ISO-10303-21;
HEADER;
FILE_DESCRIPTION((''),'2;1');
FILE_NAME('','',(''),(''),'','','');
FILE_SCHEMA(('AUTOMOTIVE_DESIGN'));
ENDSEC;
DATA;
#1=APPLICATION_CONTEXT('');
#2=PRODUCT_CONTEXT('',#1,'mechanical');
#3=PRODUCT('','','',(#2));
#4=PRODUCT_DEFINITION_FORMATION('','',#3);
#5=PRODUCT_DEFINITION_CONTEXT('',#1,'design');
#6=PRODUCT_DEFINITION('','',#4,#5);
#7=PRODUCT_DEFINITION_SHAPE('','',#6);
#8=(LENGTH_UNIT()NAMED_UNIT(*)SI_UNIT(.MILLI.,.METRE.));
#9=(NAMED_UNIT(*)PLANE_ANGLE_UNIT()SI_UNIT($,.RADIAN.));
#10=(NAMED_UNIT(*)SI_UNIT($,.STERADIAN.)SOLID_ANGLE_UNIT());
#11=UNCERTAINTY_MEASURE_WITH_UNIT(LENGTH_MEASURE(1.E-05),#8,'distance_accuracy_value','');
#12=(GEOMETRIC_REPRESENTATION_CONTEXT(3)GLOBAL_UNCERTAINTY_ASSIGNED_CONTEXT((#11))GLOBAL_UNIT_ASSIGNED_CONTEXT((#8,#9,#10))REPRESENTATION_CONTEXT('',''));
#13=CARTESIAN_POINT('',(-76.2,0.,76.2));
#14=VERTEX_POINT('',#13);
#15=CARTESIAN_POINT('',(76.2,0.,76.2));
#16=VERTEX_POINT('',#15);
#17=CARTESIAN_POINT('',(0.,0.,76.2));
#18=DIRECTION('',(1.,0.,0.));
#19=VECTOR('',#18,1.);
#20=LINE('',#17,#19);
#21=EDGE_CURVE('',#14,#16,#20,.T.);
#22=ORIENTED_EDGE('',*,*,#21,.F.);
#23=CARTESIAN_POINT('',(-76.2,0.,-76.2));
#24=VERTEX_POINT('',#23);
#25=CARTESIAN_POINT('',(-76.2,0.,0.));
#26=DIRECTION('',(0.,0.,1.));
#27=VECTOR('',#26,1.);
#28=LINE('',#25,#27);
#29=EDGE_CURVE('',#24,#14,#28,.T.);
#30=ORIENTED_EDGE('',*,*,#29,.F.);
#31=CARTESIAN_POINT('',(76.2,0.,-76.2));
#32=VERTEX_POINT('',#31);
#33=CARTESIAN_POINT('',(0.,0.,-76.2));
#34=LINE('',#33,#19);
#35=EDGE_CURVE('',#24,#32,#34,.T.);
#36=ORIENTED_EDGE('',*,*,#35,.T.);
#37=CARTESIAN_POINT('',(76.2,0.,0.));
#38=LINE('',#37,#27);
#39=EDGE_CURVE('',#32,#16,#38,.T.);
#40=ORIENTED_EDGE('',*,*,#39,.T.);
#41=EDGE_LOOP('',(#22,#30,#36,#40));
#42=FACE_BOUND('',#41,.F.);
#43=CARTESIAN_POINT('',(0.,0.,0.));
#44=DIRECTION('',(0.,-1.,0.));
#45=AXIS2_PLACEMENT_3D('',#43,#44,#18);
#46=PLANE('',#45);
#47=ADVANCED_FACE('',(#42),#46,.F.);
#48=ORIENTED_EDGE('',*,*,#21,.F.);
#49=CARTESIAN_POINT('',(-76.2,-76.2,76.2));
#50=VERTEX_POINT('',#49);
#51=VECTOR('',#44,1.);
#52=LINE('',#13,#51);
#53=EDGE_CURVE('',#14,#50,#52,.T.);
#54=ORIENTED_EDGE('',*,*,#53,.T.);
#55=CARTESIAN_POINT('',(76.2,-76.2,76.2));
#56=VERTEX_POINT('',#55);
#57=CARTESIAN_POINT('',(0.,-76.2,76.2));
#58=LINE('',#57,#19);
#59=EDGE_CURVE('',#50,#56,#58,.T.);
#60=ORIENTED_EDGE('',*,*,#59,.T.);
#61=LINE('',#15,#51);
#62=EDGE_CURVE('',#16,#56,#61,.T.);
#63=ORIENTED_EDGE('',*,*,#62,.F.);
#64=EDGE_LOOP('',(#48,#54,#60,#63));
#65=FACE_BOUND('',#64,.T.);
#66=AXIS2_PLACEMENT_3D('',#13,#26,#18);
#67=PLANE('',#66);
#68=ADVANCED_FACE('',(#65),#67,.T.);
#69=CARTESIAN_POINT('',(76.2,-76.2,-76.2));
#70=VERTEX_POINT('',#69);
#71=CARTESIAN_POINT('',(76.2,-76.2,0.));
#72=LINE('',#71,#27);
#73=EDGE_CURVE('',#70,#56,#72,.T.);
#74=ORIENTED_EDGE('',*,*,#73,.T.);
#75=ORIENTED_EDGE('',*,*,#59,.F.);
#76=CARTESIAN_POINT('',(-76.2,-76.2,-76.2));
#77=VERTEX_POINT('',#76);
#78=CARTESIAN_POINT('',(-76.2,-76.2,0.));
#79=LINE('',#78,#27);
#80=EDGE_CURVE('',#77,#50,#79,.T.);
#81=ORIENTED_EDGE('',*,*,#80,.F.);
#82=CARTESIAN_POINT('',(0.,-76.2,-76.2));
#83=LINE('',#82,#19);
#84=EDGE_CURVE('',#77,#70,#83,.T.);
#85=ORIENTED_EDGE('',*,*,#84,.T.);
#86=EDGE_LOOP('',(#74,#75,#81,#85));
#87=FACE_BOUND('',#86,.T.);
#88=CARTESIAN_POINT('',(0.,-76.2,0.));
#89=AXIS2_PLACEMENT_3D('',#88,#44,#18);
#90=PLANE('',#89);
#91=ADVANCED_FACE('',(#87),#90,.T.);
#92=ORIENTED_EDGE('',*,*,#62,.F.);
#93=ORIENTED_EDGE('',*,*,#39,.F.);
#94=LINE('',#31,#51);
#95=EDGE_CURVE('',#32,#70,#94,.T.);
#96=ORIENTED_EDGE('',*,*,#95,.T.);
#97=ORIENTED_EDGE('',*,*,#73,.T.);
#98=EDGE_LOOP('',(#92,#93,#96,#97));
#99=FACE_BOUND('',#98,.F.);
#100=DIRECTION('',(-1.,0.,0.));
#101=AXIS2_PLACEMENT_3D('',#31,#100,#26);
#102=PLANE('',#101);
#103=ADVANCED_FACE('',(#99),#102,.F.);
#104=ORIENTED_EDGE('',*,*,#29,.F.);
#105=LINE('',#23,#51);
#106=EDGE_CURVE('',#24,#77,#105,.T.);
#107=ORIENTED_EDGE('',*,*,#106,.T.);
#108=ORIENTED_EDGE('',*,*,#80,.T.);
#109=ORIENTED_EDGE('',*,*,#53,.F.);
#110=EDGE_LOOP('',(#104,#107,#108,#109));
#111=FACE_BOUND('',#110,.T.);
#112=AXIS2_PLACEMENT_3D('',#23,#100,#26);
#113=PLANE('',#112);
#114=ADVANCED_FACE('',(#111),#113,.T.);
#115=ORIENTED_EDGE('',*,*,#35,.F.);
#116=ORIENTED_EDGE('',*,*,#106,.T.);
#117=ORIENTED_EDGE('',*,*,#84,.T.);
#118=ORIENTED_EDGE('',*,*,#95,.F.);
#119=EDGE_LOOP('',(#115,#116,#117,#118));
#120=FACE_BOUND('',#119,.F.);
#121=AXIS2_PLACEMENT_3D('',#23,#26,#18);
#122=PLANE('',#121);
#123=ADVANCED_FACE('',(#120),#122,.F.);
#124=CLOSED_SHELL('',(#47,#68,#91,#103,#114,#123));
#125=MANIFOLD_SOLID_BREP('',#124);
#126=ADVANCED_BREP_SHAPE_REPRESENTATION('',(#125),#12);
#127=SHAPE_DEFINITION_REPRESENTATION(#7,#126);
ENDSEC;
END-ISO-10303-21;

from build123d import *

# Parameters (mm, degrees)
F1_W     = 152.4
F1_H     = 152.4
F2_DEPTH = 76.2


# Not quite as in the source:
# - a variable given as a bare number and used for a length is read in inches; the dataset says mm whatever the document's units were


with BuildPart() as f2:
    # F1 (on Front) → F2 (new body)
    with BuildSketch(Plane.XZ):
        Rectangle(F1_W, F1_H)
    extrude(amount=F2_DEPTH)


solid = f2.part
